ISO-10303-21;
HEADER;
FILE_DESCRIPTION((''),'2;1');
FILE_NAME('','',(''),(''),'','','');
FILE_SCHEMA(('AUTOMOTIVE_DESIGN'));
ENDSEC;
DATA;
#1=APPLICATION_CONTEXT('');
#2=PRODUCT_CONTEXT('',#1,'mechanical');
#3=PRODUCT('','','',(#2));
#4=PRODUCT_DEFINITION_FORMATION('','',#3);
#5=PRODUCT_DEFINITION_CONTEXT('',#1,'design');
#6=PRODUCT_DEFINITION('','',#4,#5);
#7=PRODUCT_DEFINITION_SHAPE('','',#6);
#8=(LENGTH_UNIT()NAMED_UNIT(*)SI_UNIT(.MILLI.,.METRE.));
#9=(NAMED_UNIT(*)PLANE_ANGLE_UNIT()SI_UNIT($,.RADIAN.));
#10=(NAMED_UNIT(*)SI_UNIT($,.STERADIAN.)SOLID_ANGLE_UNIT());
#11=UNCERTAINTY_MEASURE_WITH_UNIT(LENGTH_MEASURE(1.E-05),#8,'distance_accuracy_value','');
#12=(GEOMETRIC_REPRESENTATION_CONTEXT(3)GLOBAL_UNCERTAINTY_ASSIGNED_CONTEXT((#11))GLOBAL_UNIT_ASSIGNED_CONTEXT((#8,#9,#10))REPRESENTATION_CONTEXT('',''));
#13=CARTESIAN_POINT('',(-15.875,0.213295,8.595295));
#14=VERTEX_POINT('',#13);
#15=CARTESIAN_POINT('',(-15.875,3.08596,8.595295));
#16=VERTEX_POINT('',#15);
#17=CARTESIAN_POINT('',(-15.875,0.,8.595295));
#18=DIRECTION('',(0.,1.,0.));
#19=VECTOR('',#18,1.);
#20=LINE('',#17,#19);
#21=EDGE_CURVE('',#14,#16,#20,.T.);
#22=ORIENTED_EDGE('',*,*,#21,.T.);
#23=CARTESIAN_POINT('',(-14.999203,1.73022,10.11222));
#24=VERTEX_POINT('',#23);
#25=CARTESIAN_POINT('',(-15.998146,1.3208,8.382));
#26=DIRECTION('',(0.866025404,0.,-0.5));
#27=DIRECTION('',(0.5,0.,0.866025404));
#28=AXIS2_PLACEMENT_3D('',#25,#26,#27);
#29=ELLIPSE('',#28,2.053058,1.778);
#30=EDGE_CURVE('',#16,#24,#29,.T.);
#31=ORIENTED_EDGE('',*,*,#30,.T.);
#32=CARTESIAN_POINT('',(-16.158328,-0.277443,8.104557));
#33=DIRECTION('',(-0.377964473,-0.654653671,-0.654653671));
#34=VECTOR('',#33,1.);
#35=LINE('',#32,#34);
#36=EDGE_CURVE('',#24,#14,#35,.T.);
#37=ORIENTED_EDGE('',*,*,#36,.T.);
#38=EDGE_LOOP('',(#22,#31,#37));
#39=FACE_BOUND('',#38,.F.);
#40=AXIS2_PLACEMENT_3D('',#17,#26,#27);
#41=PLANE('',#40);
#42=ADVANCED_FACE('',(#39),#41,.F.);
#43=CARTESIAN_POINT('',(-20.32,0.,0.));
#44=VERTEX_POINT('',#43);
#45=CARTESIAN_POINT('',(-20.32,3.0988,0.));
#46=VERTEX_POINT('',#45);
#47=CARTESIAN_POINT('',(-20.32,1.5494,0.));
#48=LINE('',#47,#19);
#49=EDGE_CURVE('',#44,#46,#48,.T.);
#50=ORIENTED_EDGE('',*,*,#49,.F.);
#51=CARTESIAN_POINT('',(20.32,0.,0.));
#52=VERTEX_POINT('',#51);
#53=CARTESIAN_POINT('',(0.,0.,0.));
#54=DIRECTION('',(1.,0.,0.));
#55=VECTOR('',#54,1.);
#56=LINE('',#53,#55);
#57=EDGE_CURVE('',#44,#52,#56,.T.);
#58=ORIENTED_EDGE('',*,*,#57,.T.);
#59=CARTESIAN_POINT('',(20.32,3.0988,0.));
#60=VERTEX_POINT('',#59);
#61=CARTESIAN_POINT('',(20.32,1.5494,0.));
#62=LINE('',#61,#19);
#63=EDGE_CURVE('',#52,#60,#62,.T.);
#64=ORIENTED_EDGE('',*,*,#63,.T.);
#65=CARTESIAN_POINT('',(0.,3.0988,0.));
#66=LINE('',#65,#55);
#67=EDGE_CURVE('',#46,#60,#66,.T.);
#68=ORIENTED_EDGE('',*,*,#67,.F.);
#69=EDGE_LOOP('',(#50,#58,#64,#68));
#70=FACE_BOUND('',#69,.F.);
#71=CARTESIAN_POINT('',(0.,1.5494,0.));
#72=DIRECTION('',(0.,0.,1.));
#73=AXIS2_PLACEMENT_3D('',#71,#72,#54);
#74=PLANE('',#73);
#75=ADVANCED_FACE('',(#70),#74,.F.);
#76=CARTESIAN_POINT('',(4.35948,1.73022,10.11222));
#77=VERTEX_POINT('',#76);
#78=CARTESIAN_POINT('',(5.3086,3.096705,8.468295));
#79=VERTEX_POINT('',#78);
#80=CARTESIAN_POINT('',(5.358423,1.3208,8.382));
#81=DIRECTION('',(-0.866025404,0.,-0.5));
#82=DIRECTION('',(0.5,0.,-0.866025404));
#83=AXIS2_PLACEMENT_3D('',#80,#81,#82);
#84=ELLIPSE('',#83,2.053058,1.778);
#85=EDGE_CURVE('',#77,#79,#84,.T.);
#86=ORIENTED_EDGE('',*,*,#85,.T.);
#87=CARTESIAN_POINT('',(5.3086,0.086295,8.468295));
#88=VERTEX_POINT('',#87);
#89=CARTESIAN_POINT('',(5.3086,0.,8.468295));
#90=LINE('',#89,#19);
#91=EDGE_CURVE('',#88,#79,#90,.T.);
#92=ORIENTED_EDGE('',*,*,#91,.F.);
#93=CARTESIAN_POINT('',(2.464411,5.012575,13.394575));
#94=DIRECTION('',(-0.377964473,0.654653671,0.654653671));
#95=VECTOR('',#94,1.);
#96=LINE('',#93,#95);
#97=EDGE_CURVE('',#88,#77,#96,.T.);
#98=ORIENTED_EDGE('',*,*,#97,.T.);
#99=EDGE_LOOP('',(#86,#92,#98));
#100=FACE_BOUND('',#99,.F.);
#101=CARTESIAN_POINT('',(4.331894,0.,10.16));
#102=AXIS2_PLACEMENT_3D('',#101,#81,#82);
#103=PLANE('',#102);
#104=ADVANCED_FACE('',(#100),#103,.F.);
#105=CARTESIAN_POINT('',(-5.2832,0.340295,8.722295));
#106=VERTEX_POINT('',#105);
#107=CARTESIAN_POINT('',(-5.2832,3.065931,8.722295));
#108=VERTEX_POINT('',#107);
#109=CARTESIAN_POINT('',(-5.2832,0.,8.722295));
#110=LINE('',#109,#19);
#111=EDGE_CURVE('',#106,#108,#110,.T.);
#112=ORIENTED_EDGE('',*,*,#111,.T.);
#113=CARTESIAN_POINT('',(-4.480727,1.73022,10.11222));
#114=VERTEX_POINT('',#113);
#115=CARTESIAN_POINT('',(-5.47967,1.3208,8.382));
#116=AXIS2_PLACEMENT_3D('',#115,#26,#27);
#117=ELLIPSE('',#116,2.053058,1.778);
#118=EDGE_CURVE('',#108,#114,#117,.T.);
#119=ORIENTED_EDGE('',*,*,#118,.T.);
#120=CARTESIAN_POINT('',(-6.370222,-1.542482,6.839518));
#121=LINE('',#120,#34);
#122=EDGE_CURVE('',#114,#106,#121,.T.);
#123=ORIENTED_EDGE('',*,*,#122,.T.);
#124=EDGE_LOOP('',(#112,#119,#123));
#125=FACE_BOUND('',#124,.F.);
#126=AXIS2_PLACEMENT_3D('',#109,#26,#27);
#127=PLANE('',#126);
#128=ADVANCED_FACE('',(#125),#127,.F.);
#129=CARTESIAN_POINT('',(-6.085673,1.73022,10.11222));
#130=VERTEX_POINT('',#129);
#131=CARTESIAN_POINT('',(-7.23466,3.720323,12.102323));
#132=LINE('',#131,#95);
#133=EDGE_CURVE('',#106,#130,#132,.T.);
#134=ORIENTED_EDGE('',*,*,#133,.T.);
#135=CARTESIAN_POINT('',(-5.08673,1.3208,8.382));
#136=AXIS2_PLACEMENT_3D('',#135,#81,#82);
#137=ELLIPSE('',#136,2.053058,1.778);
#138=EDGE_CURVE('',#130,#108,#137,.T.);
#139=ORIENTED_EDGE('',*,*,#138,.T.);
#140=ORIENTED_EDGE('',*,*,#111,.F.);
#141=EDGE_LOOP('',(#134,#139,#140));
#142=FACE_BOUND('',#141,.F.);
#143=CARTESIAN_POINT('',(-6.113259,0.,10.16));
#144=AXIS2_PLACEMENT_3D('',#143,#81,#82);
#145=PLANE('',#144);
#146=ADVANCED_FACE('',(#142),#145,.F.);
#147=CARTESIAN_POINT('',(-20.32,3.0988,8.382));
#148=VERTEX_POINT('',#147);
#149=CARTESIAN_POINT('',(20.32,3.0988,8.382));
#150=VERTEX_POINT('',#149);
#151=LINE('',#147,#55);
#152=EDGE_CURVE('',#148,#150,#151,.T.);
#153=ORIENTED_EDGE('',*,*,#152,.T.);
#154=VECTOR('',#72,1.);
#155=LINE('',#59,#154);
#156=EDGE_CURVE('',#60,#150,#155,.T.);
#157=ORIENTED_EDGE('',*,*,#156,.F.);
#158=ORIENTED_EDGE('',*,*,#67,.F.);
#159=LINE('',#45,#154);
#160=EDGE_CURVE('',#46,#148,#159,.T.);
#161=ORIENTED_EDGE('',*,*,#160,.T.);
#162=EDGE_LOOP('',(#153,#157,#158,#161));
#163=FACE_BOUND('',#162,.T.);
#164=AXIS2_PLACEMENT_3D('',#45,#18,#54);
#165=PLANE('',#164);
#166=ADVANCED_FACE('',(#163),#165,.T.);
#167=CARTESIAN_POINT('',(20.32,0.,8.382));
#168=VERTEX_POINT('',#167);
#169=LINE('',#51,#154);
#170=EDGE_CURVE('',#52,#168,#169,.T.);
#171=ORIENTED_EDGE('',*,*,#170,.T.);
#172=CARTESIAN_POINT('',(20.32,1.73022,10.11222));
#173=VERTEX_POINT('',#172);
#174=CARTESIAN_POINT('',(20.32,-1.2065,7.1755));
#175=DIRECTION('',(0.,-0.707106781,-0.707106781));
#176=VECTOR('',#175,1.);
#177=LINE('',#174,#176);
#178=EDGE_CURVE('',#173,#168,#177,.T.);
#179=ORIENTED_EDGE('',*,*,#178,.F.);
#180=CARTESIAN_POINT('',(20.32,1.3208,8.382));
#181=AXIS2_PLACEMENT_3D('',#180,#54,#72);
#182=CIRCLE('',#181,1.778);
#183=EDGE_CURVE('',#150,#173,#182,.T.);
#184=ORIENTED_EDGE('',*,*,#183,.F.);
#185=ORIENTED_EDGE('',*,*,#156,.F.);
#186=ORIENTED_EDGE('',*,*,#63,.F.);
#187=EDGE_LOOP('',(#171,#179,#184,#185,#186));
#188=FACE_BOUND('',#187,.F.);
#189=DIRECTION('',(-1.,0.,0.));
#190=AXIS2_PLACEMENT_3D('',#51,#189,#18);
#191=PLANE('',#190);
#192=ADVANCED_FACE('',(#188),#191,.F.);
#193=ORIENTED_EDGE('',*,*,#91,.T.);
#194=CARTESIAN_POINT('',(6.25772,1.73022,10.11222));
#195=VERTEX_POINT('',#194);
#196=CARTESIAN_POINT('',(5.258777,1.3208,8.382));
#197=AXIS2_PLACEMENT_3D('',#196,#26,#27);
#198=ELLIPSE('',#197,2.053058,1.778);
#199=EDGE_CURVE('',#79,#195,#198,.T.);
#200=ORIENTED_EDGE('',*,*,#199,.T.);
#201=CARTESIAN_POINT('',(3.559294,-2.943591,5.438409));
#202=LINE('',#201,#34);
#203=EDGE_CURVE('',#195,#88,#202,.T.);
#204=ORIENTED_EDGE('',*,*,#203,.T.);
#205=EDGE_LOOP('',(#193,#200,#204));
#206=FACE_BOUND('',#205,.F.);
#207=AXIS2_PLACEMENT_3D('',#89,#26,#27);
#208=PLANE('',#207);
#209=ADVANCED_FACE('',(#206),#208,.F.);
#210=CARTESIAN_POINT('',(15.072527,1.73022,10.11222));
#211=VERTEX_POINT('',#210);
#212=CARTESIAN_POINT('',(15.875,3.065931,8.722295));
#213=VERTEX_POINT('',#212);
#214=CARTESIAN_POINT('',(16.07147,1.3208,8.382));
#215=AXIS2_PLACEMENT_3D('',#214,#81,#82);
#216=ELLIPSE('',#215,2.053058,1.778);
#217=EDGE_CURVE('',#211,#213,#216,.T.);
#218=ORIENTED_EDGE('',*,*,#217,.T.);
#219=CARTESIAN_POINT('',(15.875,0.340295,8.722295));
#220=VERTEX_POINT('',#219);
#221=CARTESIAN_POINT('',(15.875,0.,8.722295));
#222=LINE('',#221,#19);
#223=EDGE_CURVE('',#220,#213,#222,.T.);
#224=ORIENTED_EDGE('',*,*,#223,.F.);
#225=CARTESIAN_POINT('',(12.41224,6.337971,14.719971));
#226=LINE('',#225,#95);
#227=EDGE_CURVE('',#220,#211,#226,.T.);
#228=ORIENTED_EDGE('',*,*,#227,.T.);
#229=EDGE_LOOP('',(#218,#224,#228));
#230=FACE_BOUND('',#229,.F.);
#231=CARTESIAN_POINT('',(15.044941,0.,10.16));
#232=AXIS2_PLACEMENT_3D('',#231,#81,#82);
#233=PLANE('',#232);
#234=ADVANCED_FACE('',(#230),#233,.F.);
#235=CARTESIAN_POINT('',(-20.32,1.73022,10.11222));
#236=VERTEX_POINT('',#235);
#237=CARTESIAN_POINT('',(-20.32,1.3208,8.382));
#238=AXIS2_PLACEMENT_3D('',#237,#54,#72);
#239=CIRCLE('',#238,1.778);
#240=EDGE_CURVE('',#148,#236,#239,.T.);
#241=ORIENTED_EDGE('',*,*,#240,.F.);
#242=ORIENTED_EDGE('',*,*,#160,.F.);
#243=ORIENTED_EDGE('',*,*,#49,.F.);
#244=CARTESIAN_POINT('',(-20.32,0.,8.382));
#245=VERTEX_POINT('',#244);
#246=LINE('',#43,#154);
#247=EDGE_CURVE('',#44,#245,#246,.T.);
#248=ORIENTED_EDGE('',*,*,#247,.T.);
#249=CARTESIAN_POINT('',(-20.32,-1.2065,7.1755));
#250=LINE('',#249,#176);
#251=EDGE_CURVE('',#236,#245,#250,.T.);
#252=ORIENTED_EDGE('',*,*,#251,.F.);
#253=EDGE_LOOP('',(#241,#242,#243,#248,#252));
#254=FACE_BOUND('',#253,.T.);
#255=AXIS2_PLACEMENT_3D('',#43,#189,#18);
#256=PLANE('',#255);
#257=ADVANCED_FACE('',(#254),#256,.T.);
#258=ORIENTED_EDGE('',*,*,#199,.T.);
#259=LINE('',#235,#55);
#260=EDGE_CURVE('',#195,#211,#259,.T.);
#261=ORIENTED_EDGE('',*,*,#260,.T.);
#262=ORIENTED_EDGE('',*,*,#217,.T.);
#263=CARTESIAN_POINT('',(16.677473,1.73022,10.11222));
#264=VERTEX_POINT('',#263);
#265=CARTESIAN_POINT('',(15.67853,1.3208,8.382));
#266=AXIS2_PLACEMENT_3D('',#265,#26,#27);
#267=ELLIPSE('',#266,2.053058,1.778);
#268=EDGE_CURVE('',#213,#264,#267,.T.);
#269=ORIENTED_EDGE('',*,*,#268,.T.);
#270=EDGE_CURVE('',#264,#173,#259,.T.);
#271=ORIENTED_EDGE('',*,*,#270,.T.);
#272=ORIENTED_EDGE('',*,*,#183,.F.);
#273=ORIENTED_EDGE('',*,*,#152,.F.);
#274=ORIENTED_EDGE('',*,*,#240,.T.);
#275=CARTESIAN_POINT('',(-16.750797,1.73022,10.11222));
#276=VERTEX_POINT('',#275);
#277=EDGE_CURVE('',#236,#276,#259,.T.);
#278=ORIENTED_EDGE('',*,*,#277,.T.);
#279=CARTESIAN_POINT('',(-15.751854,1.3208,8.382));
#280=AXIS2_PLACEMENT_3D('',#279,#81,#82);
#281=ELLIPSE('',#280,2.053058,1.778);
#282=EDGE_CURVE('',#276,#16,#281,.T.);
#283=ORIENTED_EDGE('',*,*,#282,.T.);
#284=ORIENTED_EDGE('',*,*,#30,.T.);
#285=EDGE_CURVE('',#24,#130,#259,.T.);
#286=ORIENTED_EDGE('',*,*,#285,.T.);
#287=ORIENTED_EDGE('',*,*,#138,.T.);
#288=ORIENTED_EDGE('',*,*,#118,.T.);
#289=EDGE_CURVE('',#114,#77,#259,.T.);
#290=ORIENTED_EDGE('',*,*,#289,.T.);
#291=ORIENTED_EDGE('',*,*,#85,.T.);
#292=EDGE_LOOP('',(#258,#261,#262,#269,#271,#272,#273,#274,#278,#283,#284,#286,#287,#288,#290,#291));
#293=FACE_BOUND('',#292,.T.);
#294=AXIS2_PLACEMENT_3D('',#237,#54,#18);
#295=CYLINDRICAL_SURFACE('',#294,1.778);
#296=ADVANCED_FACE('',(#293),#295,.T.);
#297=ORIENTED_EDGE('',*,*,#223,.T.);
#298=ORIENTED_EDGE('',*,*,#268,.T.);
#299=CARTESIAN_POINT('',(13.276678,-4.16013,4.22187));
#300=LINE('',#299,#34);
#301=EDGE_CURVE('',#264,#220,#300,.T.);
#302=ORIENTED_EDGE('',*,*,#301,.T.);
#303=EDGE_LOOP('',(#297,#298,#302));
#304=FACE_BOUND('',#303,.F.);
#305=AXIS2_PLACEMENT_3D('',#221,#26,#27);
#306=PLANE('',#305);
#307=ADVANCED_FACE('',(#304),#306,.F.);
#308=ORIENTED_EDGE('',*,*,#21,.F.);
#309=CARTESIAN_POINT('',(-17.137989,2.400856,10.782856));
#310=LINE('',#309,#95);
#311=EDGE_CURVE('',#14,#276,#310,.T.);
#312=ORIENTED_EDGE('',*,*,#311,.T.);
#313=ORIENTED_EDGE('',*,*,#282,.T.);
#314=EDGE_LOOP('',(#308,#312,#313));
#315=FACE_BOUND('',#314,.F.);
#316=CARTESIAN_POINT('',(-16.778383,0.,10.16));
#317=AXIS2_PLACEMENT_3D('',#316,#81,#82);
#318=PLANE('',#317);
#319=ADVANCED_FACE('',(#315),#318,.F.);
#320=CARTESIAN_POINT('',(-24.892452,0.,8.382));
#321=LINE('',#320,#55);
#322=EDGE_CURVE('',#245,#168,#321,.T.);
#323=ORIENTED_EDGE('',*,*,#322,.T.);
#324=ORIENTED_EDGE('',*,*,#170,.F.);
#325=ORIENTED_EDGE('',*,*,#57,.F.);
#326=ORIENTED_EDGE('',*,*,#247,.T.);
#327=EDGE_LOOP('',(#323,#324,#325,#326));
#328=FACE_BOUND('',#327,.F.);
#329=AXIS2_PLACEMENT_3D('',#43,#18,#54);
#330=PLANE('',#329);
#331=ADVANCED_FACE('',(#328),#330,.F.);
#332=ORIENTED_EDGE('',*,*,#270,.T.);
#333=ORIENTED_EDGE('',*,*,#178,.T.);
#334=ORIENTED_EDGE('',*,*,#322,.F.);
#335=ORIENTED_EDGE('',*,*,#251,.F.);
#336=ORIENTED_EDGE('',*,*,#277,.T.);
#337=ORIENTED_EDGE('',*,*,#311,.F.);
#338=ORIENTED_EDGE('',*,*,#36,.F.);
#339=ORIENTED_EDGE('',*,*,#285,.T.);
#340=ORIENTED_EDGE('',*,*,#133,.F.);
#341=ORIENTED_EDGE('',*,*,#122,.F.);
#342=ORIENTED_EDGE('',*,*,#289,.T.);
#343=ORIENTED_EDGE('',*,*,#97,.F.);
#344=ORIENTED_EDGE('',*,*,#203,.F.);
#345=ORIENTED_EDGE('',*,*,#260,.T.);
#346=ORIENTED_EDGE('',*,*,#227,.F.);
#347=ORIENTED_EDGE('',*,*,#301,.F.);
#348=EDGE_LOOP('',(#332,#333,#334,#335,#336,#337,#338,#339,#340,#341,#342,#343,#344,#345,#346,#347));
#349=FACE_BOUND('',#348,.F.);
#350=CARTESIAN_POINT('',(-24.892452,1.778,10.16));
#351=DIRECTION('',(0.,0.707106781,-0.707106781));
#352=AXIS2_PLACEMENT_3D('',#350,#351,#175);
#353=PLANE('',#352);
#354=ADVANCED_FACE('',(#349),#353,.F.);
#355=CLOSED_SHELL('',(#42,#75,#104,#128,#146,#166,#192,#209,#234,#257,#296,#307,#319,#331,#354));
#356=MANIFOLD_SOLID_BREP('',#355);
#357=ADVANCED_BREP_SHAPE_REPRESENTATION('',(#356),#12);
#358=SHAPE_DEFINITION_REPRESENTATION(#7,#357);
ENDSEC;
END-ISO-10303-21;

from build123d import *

# Parameters (mm, degrees)
F0_W        = 40.64
F0_H        = 3.0988
F1_DEPTH    = 10.16
F3_R        = 1.778
F4_T1_DEPTH = 49.7849047052
F5_DEPTH    = 25.4


# Not quite as in the source:
# - a fillet or chamfer that OpenCascade refuses, or shapes differently, is made with other operations: its cross-section is extruded or revolved along the edge and cut away or added


with BuildPart() as f1:
    # F0 (on Top) → F1 (new body)
    with BuildSketch(Plane.XY):
        with Locations((0, 1.5494)):
            Rectangle(F0_W, F0_H)
    extrude(amount=F1_DEPTH)

    # F3
    f3_edges = [f1.edges().sort_by_distance(p)[0] for p in [
        (0, 3.0988, 10.16),
    ]]
    fillet(f3_edges, radius=F3_R)

    # F4: chamfer of 1.778 on 1 edges, made by hand

    # F4_s2 → F4_t1 (cut)
    with BuildSketch(Plane.YZ.offset(-24.8924523526)):
        Polygon((1.778, 10.16), (0, 8.382), (0, 10.16), align=None)
    extrude(amount=F4_T1_DEPTH, mode=Mode.SUBTRACT)

    # F2 (on face) → F5 (cut)
    with BuildSketch(Plane.XZ):
        Polygon((-15.875, 8.5952954744), (-14.9716174209, 10.16), (-16.7783825791, 10.16), align=None)
        Polygon((-4.4531409051, 10.16), (-6.1132590949, 10.16), (-5.2832, 8.7222954744), align=None)
        Polygon((6.2853060633, 10.16), (4.3318939367, 10.16), (5.3086, 8.4682954744), align=None)
        Polygon((16.7050590949, 10.16), (15.0449409051, 10.16), (15.875, 8.7222954744), align=None)
    extrude(amount=-F5_DEPTH, mode=Mode.SUBTRACT)


solid = f1.part
